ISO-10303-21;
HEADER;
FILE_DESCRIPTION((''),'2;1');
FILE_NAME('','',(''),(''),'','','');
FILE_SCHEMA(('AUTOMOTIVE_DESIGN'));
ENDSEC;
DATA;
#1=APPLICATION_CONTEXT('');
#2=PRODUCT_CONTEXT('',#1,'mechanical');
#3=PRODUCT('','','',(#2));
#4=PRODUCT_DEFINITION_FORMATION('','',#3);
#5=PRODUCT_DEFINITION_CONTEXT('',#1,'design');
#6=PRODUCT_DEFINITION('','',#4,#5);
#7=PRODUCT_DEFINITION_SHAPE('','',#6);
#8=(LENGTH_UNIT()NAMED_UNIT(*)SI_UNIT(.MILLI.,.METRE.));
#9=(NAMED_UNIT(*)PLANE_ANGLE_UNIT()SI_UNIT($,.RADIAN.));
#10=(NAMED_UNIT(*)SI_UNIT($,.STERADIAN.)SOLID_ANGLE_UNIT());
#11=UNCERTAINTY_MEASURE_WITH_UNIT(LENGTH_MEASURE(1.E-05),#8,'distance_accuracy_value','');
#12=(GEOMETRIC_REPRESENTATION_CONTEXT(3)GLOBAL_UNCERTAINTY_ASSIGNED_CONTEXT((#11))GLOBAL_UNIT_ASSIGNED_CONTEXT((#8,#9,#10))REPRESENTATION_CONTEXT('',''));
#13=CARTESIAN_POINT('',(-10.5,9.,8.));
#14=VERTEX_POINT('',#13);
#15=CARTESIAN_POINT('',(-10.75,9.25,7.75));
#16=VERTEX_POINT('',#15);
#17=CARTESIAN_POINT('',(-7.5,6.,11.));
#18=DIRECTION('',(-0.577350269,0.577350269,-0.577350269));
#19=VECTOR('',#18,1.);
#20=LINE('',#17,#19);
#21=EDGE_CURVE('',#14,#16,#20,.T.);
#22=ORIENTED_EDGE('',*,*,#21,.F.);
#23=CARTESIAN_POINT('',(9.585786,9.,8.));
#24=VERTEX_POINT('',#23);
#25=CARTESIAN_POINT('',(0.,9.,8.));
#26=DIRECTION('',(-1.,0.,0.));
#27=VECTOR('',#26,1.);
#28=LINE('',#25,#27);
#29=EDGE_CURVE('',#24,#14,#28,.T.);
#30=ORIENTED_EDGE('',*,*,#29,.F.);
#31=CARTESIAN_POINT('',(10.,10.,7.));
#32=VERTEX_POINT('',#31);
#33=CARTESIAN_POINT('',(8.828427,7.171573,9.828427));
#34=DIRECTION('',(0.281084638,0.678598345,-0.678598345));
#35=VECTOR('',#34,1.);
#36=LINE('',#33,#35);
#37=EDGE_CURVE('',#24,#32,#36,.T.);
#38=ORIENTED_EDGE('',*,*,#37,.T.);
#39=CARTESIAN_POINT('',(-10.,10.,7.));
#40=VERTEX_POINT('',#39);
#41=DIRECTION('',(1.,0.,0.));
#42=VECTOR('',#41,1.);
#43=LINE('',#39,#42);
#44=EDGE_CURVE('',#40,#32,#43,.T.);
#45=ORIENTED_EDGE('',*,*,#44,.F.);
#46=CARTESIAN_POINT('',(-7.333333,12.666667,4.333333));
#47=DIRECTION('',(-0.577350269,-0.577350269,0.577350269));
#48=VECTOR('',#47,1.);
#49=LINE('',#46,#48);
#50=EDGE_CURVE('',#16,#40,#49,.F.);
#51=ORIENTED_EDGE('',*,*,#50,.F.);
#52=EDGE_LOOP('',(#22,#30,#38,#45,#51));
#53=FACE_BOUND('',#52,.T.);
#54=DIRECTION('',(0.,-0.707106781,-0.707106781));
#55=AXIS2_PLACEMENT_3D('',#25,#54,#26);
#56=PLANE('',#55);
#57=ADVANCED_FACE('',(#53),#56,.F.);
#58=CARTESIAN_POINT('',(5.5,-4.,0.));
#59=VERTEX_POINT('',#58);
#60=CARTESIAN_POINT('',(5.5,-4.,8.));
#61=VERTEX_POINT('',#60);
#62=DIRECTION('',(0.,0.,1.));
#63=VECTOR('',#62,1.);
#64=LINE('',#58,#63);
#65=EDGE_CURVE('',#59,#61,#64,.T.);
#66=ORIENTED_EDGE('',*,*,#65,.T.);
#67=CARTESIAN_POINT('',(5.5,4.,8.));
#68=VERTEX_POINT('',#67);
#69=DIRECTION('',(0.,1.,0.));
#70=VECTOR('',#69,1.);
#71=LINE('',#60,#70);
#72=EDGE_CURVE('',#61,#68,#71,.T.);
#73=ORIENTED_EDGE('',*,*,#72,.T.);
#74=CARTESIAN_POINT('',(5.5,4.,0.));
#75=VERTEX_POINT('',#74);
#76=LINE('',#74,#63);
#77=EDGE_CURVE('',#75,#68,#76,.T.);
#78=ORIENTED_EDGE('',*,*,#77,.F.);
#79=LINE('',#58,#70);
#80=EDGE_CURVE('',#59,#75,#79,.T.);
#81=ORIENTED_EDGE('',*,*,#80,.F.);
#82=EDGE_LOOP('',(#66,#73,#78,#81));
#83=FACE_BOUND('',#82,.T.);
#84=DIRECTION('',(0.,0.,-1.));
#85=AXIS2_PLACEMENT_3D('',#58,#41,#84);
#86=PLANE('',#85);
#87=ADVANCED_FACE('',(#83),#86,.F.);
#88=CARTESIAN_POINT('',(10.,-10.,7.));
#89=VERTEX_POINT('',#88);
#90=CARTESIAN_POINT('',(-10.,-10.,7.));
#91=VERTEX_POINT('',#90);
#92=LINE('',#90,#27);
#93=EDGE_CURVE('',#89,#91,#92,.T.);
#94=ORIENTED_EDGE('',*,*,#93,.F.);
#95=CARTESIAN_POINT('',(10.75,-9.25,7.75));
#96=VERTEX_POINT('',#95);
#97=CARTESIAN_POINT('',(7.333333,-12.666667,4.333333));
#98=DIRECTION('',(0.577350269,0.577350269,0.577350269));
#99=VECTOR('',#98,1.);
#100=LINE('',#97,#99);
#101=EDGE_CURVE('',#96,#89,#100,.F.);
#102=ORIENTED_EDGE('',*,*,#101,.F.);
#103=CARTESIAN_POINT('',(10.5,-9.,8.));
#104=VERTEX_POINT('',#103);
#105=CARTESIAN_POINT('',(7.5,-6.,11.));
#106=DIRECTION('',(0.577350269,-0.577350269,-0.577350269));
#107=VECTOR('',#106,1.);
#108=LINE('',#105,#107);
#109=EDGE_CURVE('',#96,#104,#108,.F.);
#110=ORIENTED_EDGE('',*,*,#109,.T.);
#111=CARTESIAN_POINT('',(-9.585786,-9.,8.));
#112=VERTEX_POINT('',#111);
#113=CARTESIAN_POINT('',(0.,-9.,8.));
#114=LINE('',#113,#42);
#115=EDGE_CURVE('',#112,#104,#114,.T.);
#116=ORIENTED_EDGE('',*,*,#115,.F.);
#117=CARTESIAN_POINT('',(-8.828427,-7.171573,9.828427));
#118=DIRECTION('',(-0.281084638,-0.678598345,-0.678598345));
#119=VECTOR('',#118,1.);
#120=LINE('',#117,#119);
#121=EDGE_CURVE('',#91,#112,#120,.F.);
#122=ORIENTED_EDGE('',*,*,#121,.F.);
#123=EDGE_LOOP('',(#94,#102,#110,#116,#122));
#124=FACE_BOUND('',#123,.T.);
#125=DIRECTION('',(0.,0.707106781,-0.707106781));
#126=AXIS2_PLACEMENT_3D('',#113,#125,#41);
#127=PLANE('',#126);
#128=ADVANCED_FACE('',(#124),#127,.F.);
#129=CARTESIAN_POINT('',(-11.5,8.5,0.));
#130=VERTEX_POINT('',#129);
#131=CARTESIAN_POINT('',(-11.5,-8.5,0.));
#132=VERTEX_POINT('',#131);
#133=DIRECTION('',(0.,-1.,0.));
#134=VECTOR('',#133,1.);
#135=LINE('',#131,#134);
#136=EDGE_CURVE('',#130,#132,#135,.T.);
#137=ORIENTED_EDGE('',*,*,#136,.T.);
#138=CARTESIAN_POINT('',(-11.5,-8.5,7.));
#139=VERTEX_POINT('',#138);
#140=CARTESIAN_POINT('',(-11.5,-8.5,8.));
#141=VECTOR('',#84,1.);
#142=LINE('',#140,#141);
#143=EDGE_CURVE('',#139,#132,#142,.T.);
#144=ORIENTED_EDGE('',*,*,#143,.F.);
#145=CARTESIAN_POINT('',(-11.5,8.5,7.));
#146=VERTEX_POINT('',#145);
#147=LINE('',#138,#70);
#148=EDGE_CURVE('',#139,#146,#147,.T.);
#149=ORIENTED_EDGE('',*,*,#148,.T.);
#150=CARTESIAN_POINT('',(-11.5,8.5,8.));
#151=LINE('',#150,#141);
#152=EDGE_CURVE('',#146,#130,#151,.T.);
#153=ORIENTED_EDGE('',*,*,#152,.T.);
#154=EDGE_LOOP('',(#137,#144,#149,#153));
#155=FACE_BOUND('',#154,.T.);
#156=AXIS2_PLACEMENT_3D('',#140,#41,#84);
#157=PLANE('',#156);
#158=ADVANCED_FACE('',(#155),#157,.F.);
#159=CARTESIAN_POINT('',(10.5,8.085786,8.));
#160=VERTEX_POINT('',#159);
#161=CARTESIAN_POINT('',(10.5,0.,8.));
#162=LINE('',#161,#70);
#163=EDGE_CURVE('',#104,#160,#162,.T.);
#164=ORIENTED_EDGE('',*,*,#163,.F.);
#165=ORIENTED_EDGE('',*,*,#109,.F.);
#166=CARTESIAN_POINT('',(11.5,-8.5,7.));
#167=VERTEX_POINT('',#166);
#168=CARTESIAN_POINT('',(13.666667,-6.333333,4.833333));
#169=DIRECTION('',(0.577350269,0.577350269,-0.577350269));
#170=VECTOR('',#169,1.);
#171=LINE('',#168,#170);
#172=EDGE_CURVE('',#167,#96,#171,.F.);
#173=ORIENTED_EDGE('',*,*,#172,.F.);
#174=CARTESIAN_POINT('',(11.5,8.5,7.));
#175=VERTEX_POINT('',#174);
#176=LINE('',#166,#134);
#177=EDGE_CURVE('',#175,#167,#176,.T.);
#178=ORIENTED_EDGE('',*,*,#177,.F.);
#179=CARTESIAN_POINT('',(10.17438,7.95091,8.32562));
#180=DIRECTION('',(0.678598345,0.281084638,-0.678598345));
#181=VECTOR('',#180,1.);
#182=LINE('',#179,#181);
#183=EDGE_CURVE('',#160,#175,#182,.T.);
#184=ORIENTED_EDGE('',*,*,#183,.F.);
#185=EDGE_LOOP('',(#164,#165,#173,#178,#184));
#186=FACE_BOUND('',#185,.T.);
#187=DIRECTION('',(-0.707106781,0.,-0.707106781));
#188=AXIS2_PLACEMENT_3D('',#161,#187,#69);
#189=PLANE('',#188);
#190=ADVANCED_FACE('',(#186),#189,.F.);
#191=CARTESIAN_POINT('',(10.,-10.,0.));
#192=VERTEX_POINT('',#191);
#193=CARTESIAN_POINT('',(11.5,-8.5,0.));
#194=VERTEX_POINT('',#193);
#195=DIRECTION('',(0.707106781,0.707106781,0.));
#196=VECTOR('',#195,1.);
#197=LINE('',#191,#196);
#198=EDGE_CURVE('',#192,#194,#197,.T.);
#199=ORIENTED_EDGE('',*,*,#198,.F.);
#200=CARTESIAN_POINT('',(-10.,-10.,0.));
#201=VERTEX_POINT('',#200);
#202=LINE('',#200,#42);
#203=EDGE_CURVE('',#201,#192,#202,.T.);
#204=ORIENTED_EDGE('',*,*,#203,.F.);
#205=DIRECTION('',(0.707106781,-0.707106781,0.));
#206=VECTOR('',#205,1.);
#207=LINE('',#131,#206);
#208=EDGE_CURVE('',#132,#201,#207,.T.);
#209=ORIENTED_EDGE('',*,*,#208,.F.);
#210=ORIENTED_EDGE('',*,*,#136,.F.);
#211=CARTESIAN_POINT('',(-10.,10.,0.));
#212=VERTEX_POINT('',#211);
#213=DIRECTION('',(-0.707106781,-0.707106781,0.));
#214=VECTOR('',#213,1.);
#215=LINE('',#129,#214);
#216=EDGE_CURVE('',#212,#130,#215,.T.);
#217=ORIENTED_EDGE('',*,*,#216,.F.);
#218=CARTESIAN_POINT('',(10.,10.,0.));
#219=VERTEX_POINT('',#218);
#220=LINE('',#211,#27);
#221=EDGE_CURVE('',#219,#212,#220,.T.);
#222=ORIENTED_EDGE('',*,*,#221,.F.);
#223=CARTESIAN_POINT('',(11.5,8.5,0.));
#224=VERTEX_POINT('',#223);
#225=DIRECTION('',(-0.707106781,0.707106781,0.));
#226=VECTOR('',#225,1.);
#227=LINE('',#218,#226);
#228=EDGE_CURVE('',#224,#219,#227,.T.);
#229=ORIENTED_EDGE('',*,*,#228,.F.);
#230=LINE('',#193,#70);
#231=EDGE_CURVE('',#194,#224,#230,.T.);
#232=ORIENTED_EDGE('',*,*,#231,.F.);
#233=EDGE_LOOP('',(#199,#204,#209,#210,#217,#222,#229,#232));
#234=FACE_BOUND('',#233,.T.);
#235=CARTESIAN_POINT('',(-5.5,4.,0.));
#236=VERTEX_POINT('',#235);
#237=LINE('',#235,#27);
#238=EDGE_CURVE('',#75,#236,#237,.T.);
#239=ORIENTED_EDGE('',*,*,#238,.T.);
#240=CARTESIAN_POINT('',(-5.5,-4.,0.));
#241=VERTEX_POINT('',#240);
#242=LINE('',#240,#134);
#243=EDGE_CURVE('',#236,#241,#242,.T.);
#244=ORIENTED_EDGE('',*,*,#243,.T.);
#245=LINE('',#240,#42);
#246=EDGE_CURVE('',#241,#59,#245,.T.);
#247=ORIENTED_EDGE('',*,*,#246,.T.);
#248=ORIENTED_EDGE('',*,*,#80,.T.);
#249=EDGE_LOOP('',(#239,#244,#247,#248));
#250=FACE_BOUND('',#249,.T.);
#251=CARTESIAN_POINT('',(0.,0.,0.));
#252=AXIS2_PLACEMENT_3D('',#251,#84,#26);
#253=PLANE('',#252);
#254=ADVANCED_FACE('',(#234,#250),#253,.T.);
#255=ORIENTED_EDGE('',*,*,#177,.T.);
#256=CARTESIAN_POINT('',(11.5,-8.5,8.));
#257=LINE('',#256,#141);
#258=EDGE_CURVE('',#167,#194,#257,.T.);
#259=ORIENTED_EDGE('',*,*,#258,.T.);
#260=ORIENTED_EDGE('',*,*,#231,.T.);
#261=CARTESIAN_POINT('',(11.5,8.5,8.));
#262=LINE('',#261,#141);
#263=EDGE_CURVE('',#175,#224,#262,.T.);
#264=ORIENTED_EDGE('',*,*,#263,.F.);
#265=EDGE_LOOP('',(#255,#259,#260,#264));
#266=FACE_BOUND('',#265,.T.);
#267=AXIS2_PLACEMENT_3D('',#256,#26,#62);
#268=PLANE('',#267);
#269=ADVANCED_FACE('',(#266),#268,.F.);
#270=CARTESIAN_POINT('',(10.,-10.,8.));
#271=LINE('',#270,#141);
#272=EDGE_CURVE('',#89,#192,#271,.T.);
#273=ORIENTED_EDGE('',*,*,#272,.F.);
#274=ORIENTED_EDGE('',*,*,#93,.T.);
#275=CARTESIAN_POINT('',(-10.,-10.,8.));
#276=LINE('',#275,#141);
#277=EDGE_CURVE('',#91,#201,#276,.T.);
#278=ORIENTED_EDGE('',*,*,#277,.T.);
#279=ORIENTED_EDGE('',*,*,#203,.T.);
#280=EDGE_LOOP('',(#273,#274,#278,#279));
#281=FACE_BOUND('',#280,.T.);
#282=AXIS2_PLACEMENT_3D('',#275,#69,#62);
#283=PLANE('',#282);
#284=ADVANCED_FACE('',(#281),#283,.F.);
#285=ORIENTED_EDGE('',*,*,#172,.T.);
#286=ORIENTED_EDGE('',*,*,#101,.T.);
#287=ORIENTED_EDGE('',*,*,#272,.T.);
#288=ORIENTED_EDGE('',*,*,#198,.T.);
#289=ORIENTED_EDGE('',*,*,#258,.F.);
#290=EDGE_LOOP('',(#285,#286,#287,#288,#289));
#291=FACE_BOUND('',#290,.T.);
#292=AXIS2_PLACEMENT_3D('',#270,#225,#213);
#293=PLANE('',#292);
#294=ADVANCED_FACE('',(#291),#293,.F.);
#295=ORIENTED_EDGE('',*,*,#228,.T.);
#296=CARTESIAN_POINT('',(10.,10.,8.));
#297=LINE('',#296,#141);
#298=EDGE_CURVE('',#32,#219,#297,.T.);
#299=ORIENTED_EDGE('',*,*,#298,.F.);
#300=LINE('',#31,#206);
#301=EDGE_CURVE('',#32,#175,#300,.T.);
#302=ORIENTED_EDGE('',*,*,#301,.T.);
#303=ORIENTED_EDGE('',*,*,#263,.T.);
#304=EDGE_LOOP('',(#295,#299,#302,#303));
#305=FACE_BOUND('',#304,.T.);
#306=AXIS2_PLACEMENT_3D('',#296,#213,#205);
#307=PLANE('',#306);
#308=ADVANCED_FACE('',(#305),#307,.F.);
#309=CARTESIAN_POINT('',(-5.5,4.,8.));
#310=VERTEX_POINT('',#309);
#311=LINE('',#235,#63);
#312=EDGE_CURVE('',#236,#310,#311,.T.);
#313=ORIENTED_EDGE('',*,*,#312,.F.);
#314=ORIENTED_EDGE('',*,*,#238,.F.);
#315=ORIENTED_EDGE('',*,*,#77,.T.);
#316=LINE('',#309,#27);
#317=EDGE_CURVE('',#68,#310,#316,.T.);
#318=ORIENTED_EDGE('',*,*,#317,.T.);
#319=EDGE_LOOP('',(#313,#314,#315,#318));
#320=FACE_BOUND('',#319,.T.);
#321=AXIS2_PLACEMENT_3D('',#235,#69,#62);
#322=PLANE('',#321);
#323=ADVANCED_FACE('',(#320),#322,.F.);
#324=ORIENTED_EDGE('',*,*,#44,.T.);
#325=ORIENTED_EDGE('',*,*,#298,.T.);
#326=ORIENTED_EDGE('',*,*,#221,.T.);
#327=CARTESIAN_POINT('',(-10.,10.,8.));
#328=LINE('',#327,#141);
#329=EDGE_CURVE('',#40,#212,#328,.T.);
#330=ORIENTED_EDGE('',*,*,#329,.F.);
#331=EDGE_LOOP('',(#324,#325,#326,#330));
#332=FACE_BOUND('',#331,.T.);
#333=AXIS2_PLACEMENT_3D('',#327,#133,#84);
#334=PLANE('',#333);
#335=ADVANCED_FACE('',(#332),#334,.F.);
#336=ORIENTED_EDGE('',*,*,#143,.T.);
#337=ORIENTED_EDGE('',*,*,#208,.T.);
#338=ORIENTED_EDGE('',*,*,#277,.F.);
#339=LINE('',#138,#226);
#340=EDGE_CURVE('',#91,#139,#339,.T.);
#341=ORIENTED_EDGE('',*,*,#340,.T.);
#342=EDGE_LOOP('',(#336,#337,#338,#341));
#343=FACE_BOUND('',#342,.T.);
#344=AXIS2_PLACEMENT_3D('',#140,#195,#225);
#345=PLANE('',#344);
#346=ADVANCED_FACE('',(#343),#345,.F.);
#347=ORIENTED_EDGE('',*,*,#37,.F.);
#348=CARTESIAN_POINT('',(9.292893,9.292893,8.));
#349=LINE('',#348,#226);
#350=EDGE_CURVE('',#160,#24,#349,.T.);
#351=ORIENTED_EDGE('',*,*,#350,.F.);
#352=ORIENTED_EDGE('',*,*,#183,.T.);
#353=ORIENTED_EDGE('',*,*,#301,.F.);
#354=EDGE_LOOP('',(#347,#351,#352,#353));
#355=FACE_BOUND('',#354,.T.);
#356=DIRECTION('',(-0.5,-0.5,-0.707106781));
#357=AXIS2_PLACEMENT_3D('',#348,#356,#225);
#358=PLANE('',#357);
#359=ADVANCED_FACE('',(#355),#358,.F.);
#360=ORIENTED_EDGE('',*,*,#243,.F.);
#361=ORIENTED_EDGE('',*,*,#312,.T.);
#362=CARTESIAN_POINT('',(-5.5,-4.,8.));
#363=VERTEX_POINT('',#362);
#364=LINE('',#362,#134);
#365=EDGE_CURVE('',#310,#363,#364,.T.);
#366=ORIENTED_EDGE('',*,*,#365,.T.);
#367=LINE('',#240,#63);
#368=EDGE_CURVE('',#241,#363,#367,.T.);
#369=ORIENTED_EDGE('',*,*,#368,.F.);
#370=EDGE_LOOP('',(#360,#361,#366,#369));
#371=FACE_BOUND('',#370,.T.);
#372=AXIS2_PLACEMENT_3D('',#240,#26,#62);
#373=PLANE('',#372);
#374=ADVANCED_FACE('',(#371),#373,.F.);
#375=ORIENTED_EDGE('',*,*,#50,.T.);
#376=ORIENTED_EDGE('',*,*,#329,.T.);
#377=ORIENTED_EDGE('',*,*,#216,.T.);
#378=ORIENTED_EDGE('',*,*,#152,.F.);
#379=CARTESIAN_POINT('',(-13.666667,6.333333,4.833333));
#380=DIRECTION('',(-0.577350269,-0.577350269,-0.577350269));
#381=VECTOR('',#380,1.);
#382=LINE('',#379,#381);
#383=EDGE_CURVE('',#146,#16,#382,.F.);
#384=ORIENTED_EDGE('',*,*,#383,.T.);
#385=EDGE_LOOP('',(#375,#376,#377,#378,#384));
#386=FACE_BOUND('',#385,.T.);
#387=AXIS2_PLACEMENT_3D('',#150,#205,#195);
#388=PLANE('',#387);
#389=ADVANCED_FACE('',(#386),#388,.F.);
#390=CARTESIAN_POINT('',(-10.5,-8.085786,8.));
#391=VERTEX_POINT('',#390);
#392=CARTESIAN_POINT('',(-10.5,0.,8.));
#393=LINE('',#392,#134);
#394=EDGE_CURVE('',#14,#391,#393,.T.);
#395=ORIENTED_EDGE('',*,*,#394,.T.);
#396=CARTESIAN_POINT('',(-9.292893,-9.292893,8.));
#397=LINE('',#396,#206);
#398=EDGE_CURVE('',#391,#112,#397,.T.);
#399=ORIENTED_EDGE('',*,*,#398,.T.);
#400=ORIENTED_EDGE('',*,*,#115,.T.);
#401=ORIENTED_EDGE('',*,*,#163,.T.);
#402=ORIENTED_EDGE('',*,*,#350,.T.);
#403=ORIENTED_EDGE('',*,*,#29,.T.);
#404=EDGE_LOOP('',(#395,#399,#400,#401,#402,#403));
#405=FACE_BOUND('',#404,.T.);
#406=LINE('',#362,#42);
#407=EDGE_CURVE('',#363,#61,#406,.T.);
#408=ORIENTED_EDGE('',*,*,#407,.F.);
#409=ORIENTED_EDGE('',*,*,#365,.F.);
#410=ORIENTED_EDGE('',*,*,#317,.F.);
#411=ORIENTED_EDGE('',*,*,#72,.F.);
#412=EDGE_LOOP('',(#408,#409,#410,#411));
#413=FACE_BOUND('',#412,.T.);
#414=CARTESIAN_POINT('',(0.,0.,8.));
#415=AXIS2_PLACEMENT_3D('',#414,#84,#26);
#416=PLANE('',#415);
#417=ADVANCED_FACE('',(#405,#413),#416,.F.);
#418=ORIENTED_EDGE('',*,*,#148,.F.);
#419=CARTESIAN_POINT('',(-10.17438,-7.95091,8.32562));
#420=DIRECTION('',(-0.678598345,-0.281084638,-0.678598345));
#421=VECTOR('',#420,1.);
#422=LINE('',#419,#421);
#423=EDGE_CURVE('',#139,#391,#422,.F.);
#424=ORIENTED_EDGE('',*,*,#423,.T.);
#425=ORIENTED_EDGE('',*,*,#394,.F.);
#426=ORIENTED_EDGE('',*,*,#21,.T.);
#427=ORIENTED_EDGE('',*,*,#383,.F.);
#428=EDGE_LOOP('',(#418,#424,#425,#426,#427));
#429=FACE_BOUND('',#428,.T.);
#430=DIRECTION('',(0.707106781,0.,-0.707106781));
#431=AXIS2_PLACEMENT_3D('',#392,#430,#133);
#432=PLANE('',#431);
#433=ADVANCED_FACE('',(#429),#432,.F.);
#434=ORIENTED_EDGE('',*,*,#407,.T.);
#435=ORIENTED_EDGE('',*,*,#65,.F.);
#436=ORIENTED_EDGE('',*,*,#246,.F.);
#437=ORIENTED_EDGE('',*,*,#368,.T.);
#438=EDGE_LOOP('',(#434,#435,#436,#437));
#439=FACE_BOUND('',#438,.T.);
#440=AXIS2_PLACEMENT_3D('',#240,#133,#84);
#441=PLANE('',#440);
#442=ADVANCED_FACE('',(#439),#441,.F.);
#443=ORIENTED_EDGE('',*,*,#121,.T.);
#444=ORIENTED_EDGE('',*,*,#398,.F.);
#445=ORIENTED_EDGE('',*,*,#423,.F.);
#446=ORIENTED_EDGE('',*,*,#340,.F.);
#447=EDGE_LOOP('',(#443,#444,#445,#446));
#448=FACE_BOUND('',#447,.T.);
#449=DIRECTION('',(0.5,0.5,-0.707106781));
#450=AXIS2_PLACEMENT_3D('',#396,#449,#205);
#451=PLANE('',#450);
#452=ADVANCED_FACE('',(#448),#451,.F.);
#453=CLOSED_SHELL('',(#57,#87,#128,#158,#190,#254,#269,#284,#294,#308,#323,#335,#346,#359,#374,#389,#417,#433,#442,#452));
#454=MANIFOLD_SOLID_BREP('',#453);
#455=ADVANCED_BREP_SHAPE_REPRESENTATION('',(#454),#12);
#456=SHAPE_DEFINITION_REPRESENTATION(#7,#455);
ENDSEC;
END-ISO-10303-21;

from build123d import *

# Parameters (mm, degrees)
SALIENTE_EXTRUIR1_DEPTH = 8
CROQUIS2_W              = 11
CROQUIS2_H              = 8
CORTAR_EXTRUIR1_DEPTH   = 18.211914478
CHAFL_N1_SIZE           = 1


with BuildPart() as part:
    # Croquis1 → Saliente-Extruir1 (new body)
    with BuildSketch(Plane.XY):
        Polygon((-11.5, 8.5), (-10, 10), (10, 10), (11.5, 8.5), (11.5, -8.5), (10, -10), (-10, -10), (-11.5, -8.5), align=None)
    extrude(amount=SALIENTE_EXTRUIR1_DEPTH)

    # Croquis2 → Cortar-Extruir1 (cut, through all)
    with BuildSketch(Plane.XY.offset(8)):
        Rectangle(CROQUIS2_W, CROQUIS2_H)
    extrude(amount=-CORTAR_EXTRUIR1_DEPTH, mode=Mode.SUBTRACT)

    # Chaflán1
    # the kernel refuses this chamfer: 1 mm, written as the material it takes off along each edge
    with BuildSketch(Plane(origin=(-11.5, -11.071682988, 8), x_dir=(-0.027495876610585623, 0, -0.9996219169112968), z_dir=(0, 1, 0))) as chafl_n1_piece_1:
        Polygon((CHAFL_N1_SIZE * 0.999621916911, -CHAFL_N1_SIZE * 0.0274958766106), (-CHAFL_N1_SIZE * 0.0274958766106, -CHAFL_N1_SIZE * 0.999621916911), (0, 0), align=None)
    extrude(amount=22.143365976, mode=Mode.SUBTRACT)
    with BuildSketch(Plane(origin=(-8.18154552, -11.81845448, 8), x_dir=(0.7068394360706735, 0.7068394360706735, 0.02749587661058563), z_dir=(-0.7071067811865476, 0.7071067811865476, 0)), Plane(origin=(8.18154552, 11.81845448, 8), x_dir=(-0.7068394360706735, -0.7068394360706735, 0.02749587661058563), z_dir=(0.7071067811865476, -0.7071067811865476, 0))) as chafl_n1_piece_2:
        Polygon((CHAFL_N1_SIZE * 0.999621916911, CHAFL_N1_SIZE * 0.0274958766106), (-CHAFL_N1_SIZE * 0.0274958766106, CHAFL_N1_SIZE * 0.999621916911), (0, 0), align=None)
    extrude(amount=7.264686319, mode=Mode.SUBTRACT)
    with BuildSketch(Plane(origin=(12.571682988, -10, 8), x_dir=(0, 0.9996219169112968, 0.027495876610585647), z_dir=(-1, 0, 0))) as chafl_n1_piece_3:
        Polygon((CHAFL_N1_SIZE * 0.999621916911, CHAFL_N1_SIZE * 0.0274958766106), (-CHAFL_N1_SIZE * 0.0274958766106, CHAFL_N1_SIZE * 0.999621916911), (0, 0), align=None)
    extrude(amount=25.143365976, mode=Mode.SUBTRACT)
    with BuildSketch(Plane(origin=(11.5, 11.071682988, 8), x_dir=(-0.9996219169112968, 0, 0.027495876610585647), z_dir=(0, -1, 0))) as chafl_n1_piece_4:
        Polygon((CHAFL_N1_SIZE * 0.999621916911, CHAFL_N1_SIZE * 0.0274958766106), (-CHAFL_N1_SIZE * 0.0274958766106, CHAFL_N1_SIZE * 0.999621916911), (0, 0), align=None)
    extrude(amount=22.143365976, mode=Mode.SUBTRACT)
    with BuildSketch(Plane(origin=(-12.571682988, 10, 8), x_dir=(0, 0.027495876610585623, -0.9996219169112968), z_dir=(1, 0, 0))) as chafl_n1_piece_5:
        Polygon((CHAFL_N1_SIZE * 0.999621916911, -CHAFL_N1_SIZE * 0.0274958766106), (-CHAFL_N1_SIZE * 0.0274958766106, -CHAFL_N1_SIZE * 0.999621916911), (0, 0), align=None)
    extrude(amount=25.143365976, mode=Mode.SUBTRACT)


solid = part.part
